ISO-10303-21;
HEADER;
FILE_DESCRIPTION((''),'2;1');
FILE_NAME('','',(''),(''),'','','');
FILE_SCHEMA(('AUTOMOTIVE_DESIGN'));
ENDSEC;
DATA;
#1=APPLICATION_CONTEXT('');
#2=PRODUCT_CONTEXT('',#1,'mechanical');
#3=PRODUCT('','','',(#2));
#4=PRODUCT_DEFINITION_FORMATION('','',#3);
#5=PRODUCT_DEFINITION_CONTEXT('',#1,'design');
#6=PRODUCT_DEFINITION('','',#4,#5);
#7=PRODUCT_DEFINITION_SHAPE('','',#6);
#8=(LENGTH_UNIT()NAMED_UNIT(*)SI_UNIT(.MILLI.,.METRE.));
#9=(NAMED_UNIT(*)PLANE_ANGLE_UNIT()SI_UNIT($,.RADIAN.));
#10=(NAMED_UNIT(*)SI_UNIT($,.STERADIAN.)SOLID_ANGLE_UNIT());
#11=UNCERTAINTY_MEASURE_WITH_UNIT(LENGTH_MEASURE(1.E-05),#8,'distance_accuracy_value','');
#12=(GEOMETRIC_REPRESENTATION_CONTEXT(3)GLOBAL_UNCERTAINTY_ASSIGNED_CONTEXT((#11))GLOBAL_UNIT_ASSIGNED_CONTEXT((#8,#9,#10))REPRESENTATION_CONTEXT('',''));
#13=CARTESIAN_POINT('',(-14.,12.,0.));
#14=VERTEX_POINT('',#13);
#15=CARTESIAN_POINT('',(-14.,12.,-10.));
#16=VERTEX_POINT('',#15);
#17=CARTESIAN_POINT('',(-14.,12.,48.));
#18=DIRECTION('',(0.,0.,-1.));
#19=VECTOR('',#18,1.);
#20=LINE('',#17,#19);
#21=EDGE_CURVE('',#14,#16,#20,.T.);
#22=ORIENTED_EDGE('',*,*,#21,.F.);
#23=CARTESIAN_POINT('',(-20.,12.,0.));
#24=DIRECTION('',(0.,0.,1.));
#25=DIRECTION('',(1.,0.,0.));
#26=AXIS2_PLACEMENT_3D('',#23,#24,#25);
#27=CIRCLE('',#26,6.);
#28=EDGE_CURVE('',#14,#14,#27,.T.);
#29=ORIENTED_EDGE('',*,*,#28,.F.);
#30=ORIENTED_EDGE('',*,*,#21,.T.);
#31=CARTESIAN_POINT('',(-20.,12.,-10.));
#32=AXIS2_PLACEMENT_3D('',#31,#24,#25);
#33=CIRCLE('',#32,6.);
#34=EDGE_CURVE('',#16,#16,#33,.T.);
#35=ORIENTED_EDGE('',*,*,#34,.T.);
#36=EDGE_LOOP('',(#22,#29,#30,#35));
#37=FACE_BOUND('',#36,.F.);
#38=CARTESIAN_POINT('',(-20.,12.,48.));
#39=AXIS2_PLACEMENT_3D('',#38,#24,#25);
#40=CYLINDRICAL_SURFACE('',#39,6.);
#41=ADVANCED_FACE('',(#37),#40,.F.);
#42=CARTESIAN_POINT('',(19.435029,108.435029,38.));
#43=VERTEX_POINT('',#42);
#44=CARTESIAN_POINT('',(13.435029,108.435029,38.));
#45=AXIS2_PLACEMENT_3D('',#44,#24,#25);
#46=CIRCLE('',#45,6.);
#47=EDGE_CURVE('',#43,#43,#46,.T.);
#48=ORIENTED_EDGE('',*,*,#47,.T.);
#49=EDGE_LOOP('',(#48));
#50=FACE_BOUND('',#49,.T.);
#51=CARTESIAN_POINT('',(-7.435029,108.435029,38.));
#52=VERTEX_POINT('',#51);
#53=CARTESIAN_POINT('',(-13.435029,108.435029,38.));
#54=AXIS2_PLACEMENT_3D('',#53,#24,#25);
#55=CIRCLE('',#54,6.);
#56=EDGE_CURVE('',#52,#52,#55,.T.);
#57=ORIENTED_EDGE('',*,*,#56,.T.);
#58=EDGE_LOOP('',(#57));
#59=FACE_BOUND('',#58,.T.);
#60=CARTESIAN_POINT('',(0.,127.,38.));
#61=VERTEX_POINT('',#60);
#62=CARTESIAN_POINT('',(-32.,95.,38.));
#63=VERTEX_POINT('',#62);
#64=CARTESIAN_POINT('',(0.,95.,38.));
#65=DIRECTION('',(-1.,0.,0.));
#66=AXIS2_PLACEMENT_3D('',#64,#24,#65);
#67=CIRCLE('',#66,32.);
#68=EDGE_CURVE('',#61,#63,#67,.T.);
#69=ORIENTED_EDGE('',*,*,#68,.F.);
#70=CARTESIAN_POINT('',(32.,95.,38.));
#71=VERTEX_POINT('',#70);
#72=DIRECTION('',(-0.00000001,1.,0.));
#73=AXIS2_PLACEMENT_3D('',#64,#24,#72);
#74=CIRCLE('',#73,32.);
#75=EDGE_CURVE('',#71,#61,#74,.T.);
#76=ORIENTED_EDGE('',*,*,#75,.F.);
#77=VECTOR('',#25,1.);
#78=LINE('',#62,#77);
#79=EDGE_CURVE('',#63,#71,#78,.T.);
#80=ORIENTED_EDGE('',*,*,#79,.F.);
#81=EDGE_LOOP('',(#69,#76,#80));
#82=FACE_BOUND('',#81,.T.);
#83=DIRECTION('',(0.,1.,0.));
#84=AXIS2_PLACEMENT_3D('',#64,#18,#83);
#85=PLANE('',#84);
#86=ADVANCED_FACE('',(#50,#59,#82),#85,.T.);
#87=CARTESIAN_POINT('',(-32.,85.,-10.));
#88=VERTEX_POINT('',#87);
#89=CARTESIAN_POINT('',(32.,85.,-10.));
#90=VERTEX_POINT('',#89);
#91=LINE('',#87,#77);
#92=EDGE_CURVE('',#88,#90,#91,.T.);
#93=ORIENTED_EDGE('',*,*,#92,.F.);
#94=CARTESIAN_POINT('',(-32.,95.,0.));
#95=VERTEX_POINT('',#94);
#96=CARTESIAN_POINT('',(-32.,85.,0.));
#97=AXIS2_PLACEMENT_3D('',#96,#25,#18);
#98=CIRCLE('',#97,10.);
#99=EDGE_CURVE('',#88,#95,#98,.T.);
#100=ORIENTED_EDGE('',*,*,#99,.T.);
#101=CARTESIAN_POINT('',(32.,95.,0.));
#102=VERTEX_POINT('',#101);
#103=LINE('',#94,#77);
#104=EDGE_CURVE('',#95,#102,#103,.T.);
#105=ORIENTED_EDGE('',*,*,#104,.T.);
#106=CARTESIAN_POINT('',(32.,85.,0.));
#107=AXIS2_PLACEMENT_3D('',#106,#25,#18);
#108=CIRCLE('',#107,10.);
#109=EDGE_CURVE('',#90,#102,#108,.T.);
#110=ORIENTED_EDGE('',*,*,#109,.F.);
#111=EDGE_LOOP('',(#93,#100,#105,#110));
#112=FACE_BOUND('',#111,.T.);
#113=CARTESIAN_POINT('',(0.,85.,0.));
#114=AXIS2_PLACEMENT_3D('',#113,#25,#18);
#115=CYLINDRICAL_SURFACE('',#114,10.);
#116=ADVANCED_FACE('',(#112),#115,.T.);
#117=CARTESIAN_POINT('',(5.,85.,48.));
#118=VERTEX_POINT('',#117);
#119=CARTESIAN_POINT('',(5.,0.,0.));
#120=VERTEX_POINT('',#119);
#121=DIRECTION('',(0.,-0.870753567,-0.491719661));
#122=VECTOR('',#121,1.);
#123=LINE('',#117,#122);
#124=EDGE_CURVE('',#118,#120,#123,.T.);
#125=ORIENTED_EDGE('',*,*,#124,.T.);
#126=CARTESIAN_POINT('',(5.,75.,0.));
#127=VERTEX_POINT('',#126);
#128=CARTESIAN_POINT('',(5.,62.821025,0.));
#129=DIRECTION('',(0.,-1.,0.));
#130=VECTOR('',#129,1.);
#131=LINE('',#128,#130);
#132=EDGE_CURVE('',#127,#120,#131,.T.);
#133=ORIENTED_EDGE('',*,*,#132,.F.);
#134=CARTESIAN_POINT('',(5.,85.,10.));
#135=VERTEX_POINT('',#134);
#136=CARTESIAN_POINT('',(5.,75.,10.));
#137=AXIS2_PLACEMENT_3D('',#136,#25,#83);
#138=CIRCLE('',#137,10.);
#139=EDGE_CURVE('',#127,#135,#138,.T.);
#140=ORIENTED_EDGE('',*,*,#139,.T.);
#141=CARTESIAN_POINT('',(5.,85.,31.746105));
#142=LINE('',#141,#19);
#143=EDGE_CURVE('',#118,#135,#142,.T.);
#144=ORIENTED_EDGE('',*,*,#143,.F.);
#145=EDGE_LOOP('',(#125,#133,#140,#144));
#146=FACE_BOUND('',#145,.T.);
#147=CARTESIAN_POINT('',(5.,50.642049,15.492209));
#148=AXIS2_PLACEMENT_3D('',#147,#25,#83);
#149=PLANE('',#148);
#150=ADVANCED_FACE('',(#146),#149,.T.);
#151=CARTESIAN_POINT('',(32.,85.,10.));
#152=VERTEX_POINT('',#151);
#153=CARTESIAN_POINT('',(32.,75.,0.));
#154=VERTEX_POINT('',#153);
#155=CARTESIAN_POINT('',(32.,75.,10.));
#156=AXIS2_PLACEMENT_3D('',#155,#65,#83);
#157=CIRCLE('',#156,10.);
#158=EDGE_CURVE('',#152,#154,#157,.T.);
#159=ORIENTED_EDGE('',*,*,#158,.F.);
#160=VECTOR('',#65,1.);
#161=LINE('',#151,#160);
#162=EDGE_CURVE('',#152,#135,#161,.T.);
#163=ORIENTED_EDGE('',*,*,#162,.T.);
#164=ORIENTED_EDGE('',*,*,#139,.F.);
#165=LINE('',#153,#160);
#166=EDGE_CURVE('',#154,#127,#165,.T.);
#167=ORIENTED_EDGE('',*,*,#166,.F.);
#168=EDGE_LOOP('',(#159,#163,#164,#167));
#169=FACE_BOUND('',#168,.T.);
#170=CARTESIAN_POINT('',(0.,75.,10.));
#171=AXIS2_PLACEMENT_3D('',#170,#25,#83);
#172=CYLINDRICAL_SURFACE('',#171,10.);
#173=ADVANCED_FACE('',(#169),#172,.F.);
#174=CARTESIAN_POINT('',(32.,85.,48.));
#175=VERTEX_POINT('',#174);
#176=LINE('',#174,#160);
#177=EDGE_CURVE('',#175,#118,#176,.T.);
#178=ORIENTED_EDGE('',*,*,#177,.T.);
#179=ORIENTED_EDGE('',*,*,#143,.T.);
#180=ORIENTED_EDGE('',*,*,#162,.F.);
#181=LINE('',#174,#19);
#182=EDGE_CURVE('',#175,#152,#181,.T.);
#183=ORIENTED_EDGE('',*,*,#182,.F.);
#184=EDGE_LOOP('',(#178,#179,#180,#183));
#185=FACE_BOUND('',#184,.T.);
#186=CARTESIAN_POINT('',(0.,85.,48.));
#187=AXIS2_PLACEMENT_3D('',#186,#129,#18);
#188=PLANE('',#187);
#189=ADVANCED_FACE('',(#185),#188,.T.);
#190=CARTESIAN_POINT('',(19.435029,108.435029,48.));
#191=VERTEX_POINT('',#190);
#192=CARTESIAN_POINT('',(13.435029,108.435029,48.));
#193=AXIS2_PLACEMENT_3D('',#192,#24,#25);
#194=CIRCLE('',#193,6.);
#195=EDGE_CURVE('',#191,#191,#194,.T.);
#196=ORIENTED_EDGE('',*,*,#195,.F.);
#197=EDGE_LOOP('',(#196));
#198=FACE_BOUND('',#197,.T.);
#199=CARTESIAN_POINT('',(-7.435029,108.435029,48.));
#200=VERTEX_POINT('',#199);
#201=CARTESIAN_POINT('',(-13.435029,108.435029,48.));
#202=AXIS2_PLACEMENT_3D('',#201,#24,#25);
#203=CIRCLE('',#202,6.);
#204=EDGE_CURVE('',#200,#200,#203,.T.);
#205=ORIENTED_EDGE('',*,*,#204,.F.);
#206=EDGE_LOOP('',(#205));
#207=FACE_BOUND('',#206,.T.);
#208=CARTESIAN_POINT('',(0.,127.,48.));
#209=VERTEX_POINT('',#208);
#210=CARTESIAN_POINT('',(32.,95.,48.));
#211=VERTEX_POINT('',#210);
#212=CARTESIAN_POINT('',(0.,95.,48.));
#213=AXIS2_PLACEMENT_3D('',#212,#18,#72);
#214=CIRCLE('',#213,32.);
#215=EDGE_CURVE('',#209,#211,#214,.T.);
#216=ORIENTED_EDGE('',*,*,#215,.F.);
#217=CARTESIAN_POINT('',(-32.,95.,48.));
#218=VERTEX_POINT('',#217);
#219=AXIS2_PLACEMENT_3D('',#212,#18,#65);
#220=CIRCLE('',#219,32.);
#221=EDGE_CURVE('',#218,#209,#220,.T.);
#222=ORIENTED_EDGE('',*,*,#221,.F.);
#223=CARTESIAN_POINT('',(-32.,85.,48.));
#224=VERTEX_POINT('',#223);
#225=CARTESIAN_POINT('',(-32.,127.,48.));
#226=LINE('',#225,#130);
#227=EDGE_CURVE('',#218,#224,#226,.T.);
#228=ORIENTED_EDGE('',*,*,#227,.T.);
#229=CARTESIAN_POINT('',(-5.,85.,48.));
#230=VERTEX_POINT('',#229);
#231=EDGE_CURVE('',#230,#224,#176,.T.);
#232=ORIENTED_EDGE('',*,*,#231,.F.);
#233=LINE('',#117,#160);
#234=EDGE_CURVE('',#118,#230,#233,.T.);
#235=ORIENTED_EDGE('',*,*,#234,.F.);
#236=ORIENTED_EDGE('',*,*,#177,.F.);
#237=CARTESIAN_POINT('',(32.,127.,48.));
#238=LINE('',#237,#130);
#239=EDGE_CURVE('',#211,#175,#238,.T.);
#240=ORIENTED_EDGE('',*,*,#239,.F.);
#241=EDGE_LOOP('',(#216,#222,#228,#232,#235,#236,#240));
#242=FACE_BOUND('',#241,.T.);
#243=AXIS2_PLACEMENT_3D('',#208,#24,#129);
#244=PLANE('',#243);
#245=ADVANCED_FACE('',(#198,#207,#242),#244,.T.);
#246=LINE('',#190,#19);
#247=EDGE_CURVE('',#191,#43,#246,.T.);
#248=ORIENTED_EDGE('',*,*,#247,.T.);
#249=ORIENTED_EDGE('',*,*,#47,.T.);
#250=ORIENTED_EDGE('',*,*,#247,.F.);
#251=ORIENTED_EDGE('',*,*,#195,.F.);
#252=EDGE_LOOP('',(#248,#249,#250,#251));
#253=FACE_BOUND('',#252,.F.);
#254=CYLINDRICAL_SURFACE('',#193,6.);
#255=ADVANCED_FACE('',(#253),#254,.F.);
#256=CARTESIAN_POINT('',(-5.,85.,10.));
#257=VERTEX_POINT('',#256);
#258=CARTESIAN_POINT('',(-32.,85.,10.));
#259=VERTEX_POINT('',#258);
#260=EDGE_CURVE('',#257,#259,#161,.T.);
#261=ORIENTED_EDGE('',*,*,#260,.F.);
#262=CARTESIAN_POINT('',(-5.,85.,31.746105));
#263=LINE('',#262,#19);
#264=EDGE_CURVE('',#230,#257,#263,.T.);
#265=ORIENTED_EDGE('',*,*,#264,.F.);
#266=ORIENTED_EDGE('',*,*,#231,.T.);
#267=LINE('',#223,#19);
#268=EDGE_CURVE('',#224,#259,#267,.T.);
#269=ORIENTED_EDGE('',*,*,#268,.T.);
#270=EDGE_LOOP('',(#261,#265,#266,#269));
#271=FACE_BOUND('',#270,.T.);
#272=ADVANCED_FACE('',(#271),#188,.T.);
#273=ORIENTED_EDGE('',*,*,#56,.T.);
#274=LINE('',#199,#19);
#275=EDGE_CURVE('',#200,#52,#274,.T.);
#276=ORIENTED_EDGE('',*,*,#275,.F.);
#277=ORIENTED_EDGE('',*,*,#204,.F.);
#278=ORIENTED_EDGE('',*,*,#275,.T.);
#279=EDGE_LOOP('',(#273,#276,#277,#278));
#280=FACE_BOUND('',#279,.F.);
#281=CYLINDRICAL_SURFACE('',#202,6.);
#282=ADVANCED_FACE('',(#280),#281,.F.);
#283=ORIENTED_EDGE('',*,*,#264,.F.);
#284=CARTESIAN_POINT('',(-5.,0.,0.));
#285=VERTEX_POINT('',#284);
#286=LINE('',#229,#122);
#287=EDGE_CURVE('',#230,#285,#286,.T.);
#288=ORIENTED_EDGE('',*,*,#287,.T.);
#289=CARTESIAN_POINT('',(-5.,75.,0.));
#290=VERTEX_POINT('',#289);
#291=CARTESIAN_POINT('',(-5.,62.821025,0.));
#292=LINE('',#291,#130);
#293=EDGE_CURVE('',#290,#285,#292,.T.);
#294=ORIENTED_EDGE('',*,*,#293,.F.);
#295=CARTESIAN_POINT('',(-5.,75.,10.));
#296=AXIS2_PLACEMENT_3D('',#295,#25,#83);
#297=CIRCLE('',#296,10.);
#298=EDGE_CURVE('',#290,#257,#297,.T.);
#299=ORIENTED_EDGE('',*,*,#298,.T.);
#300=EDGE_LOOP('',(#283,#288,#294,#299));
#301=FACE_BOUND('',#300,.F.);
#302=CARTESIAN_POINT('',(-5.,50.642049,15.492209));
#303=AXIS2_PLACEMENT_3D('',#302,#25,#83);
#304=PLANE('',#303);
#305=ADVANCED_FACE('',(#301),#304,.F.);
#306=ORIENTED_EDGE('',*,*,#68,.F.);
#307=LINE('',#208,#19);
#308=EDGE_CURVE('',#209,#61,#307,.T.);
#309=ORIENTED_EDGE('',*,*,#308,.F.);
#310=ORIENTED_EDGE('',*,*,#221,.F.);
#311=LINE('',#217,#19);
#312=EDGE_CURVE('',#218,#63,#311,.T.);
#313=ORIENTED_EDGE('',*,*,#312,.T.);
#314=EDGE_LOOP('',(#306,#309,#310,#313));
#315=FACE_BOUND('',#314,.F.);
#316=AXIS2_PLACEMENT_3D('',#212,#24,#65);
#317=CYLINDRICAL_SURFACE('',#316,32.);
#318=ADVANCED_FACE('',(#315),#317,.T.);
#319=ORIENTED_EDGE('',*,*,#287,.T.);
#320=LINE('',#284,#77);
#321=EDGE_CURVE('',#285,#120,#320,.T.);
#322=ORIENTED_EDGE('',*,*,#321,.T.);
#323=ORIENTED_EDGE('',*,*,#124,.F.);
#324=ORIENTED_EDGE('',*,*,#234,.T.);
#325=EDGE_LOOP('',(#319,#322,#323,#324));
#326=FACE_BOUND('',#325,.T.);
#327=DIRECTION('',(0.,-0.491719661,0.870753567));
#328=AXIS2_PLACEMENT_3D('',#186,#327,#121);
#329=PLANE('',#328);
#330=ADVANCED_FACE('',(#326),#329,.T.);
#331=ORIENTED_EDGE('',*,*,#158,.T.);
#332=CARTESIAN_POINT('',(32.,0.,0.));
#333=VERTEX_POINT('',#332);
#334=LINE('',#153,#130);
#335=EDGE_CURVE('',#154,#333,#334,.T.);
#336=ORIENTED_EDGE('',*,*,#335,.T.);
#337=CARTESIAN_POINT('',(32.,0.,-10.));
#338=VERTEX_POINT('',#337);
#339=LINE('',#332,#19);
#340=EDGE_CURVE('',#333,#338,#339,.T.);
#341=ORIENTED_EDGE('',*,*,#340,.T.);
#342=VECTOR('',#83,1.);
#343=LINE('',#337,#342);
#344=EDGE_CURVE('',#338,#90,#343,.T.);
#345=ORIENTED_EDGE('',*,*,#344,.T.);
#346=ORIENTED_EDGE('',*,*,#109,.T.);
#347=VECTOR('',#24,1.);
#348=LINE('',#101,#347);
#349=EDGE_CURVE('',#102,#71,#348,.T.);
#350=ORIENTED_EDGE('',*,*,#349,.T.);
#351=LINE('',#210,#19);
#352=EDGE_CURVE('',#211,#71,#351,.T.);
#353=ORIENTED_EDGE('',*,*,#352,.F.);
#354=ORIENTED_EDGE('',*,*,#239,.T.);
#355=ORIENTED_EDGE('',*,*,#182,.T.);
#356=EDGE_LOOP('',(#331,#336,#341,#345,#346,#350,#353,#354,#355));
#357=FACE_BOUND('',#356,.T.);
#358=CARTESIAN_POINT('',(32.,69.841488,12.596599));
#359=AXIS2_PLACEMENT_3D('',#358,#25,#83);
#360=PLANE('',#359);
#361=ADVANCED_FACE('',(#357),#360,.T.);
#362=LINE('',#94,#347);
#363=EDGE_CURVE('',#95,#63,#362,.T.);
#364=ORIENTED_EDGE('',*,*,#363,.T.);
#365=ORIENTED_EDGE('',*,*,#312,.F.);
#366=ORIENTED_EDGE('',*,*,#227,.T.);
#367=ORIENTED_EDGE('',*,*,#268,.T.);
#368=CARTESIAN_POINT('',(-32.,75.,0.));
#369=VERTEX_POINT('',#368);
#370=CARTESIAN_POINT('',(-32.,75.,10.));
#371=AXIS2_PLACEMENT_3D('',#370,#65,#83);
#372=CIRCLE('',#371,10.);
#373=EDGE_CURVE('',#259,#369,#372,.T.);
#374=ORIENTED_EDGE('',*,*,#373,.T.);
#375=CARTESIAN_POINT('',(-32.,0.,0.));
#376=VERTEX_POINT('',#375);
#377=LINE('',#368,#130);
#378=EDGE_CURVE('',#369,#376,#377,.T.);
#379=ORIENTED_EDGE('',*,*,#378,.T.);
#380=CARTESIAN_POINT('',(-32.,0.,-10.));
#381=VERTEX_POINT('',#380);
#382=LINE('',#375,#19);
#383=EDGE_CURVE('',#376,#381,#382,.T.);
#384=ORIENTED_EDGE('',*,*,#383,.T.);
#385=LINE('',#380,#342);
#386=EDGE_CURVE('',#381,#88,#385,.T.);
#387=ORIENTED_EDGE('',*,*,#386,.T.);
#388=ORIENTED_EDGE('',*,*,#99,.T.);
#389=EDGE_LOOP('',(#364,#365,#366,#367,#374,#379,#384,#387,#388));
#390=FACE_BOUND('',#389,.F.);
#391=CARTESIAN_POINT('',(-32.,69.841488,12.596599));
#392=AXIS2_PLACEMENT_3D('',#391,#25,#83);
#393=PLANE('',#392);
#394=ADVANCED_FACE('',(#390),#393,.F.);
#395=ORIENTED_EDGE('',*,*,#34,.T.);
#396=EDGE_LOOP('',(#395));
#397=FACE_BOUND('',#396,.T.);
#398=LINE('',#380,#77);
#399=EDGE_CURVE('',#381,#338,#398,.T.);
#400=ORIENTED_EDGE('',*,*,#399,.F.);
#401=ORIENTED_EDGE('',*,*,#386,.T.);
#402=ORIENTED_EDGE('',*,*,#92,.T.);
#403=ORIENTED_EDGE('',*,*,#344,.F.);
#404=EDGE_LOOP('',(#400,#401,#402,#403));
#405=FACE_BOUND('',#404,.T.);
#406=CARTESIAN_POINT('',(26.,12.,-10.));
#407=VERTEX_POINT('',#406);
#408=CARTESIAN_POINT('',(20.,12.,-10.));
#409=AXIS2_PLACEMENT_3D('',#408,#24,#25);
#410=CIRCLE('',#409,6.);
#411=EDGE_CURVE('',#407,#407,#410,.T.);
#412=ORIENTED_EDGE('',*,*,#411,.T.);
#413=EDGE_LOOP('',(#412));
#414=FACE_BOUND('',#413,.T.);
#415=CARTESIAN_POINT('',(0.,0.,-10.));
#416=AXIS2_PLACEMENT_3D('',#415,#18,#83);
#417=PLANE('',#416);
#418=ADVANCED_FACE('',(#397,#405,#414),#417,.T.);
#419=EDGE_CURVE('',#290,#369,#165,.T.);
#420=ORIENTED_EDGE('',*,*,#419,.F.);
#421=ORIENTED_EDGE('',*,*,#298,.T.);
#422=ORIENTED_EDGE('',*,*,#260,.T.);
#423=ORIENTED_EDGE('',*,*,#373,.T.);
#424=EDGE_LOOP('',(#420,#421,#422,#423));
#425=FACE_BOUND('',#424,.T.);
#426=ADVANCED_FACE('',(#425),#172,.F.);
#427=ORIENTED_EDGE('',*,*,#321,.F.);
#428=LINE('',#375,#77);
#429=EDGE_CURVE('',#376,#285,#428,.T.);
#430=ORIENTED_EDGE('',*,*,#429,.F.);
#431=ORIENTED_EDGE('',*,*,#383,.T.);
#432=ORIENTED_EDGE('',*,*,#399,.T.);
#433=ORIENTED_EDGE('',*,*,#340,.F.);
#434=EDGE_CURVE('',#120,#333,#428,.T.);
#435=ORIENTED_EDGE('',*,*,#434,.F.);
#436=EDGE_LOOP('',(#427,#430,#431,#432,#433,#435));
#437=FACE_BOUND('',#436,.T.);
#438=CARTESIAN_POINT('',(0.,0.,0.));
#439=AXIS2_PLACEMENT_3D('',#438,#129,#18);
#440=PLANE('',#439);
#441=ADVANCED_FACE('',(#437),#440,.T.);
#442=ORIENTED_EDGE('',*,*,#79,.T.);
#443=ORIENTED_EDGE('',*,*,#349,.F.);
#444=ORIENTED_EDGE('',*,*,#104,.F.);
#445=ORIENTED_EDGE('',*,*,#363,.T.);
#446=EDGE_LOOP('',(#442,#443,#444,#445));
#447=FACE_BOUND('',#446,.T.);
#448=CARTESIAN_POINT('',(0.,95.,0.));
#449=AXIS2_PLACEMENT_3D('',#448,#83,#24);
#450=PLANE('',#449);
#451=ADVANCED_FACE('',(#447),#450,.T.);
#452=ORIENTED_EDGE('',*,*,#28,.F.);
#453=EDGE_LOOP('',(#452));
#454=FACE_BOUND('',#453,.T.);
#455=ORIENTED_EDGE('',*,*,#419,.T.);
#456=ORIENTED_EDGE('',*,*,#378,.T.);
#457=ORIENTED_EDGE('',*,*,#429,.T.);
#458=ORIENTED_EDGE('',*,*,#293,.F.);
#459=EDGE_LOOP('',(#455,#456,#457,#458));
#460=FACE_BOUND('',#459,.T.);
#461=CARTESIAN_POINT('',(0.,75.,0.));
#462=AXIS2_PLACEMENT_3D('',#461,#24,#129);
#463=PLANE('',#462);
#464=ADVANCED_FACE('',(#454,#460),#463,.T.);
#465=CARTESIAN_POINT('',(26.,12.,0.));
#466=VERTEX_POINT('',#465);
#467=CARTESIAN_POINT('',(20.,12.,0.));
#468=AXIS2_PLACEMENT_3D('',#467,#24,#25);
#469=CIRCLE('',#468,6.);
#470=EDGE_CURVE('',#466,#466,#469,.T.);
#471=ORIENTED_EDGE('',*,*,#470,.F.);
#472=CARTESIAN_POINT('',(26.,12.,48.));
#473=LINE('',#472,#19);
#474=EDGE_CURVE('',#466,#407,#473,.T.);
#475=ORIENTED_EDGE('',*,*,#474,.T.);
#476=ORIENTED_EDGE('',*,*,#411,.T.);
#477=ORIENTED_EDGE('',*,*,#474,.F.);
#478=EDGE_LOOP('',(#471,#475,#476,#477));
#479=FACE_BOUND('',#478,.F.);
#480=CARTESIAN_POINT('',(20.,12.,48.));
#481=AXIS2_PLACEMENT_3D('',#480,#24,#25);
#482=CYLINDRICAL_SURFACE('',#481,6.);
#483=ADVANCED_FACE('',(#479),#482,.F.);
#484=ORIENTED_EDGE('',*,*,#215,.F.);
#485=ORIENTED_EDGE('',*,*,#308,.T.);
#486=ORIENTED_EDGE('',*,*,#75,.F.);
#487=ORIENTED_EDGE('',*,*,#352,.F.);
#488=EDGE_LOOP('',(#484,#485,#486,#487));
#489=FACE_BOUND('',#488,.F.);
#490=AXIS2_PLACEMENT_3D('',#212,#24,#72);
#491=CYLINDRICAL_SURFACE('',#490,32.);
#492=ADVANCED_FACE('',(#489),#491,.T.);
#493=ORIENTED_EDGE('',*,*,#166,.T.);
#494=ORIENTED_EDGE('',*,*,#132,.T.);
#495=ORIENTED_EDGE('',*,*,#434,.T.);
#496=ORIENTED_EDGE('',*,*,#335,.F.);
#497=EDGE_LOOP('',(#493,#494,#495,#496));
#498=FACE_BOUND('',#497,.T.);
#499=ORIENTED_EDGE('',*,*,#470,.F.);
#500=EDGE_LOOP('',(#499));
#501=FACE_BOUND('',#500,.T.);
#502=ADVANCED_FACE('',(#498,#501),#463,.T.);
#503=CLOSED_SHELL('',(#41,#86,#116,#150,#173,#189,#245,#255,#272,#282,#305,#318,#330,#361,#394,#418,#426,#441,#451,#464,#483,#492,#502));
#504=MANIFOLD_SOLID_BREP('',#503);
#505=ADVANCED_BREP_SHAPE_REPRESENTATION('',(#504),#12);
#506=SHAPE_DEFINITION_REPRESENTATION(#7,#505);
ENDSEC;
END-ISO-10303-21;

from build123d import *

# Parameters (mm, degrees)
F1_DEPTH = 5
F2_DEPTH = 32
F4_R     = 6
F5_DEPTH = 58.001


with BuildPart() as f1:
    # F0 (on Right) → F1 (new body, symmetric)
    with BuildSketch(Plane.YZ):
        with BuildLine():
            Line((85, 48), (0, 0))
            Line((0, 0), (75, 0))
            ThreePointArc((75, 0), (82.0710678119, 2.9289321881), (85, 10))
            Line((85, 10), (85, 48))
        make_face()
        with BuildLine():
            Line((75, 0), (0, 0))
            Line((0, 0), (0, -10))
            Line((0, -10), (85, -10))
            ThreePointArc((85, -10), (92.0710678119, -7.0710678119), (95, 0))
            Line((95, 0), (95, 38))
            Line((95, 38), (127, 38))
            Line((127, 38), (127, 48))
            Line((127, 48), (85, 48))
            Line((85, 48), (85, 10))
            ThreePointArc((85, 10), (82.0710678119, 2.9289321881), (75, 0))
        make_face()
    extrude(amount=F1_DEPTH, both=True)

    # F0 (on Right) → F2 (join, symmetric)
    with BuildSketch(Plane.YZ):
        with BuildLine():
            Line((75, 0), (0, 0))
            Line((0, 0), (0, -10))
            Line((0, -10), (85, -10))
            ThreePointArc((85, -10), (92.0710678119, -7.0710678119), (95, 0))
            Line((95, 0), (95, 38))
            Line((95, 38), (127, 38))
            Line((127, 38), (127, 48))
            Line((127, 48), (85, 48))
            Line((85, 48), (85, 10))
            ThreePointArc((85, 10), (82.0710678119, 2.9289321881), (75, 0))
        make_face()
    extrude(amount=F2_DEPTH, both=True)

    # F4 (on face) → F5 (cut, through all)
    with BuildSketch(Plane.XY.offset(48)):
        with BuildLine():
            ThreePointArc((-32, 95), (-22.6274171136, 117.6274168823), (-3.272e-07, 127))
            Line((-3.272e-07, 127), (-32, 127))
            Line((-32, 127), (-32, 95))
        make_face()
        with BuildLine():
            ThreePointArc((-3.272e-07, 127), (22.6274168823, 117.6274171136), (32, 95))
            Line((32, 95), (32, 127))
            Line((32, 127), (-3.272e-07, 127))
        make_face()
        with Locations((13.4350288425, 108.4350288425)):
            Circle(F4_R)
        with Locations((-13.4350288425, 108.4350288425)):
            Circle(F4_R)
        with Locations((-20, 12)):
            Circle(F4_R)
        with Locations((20, 12)):
            Circle(F4_R)
    extrude(amount=-F5_DEPTH, mode=Mode.SUBTRACT)


solid = f1.part
